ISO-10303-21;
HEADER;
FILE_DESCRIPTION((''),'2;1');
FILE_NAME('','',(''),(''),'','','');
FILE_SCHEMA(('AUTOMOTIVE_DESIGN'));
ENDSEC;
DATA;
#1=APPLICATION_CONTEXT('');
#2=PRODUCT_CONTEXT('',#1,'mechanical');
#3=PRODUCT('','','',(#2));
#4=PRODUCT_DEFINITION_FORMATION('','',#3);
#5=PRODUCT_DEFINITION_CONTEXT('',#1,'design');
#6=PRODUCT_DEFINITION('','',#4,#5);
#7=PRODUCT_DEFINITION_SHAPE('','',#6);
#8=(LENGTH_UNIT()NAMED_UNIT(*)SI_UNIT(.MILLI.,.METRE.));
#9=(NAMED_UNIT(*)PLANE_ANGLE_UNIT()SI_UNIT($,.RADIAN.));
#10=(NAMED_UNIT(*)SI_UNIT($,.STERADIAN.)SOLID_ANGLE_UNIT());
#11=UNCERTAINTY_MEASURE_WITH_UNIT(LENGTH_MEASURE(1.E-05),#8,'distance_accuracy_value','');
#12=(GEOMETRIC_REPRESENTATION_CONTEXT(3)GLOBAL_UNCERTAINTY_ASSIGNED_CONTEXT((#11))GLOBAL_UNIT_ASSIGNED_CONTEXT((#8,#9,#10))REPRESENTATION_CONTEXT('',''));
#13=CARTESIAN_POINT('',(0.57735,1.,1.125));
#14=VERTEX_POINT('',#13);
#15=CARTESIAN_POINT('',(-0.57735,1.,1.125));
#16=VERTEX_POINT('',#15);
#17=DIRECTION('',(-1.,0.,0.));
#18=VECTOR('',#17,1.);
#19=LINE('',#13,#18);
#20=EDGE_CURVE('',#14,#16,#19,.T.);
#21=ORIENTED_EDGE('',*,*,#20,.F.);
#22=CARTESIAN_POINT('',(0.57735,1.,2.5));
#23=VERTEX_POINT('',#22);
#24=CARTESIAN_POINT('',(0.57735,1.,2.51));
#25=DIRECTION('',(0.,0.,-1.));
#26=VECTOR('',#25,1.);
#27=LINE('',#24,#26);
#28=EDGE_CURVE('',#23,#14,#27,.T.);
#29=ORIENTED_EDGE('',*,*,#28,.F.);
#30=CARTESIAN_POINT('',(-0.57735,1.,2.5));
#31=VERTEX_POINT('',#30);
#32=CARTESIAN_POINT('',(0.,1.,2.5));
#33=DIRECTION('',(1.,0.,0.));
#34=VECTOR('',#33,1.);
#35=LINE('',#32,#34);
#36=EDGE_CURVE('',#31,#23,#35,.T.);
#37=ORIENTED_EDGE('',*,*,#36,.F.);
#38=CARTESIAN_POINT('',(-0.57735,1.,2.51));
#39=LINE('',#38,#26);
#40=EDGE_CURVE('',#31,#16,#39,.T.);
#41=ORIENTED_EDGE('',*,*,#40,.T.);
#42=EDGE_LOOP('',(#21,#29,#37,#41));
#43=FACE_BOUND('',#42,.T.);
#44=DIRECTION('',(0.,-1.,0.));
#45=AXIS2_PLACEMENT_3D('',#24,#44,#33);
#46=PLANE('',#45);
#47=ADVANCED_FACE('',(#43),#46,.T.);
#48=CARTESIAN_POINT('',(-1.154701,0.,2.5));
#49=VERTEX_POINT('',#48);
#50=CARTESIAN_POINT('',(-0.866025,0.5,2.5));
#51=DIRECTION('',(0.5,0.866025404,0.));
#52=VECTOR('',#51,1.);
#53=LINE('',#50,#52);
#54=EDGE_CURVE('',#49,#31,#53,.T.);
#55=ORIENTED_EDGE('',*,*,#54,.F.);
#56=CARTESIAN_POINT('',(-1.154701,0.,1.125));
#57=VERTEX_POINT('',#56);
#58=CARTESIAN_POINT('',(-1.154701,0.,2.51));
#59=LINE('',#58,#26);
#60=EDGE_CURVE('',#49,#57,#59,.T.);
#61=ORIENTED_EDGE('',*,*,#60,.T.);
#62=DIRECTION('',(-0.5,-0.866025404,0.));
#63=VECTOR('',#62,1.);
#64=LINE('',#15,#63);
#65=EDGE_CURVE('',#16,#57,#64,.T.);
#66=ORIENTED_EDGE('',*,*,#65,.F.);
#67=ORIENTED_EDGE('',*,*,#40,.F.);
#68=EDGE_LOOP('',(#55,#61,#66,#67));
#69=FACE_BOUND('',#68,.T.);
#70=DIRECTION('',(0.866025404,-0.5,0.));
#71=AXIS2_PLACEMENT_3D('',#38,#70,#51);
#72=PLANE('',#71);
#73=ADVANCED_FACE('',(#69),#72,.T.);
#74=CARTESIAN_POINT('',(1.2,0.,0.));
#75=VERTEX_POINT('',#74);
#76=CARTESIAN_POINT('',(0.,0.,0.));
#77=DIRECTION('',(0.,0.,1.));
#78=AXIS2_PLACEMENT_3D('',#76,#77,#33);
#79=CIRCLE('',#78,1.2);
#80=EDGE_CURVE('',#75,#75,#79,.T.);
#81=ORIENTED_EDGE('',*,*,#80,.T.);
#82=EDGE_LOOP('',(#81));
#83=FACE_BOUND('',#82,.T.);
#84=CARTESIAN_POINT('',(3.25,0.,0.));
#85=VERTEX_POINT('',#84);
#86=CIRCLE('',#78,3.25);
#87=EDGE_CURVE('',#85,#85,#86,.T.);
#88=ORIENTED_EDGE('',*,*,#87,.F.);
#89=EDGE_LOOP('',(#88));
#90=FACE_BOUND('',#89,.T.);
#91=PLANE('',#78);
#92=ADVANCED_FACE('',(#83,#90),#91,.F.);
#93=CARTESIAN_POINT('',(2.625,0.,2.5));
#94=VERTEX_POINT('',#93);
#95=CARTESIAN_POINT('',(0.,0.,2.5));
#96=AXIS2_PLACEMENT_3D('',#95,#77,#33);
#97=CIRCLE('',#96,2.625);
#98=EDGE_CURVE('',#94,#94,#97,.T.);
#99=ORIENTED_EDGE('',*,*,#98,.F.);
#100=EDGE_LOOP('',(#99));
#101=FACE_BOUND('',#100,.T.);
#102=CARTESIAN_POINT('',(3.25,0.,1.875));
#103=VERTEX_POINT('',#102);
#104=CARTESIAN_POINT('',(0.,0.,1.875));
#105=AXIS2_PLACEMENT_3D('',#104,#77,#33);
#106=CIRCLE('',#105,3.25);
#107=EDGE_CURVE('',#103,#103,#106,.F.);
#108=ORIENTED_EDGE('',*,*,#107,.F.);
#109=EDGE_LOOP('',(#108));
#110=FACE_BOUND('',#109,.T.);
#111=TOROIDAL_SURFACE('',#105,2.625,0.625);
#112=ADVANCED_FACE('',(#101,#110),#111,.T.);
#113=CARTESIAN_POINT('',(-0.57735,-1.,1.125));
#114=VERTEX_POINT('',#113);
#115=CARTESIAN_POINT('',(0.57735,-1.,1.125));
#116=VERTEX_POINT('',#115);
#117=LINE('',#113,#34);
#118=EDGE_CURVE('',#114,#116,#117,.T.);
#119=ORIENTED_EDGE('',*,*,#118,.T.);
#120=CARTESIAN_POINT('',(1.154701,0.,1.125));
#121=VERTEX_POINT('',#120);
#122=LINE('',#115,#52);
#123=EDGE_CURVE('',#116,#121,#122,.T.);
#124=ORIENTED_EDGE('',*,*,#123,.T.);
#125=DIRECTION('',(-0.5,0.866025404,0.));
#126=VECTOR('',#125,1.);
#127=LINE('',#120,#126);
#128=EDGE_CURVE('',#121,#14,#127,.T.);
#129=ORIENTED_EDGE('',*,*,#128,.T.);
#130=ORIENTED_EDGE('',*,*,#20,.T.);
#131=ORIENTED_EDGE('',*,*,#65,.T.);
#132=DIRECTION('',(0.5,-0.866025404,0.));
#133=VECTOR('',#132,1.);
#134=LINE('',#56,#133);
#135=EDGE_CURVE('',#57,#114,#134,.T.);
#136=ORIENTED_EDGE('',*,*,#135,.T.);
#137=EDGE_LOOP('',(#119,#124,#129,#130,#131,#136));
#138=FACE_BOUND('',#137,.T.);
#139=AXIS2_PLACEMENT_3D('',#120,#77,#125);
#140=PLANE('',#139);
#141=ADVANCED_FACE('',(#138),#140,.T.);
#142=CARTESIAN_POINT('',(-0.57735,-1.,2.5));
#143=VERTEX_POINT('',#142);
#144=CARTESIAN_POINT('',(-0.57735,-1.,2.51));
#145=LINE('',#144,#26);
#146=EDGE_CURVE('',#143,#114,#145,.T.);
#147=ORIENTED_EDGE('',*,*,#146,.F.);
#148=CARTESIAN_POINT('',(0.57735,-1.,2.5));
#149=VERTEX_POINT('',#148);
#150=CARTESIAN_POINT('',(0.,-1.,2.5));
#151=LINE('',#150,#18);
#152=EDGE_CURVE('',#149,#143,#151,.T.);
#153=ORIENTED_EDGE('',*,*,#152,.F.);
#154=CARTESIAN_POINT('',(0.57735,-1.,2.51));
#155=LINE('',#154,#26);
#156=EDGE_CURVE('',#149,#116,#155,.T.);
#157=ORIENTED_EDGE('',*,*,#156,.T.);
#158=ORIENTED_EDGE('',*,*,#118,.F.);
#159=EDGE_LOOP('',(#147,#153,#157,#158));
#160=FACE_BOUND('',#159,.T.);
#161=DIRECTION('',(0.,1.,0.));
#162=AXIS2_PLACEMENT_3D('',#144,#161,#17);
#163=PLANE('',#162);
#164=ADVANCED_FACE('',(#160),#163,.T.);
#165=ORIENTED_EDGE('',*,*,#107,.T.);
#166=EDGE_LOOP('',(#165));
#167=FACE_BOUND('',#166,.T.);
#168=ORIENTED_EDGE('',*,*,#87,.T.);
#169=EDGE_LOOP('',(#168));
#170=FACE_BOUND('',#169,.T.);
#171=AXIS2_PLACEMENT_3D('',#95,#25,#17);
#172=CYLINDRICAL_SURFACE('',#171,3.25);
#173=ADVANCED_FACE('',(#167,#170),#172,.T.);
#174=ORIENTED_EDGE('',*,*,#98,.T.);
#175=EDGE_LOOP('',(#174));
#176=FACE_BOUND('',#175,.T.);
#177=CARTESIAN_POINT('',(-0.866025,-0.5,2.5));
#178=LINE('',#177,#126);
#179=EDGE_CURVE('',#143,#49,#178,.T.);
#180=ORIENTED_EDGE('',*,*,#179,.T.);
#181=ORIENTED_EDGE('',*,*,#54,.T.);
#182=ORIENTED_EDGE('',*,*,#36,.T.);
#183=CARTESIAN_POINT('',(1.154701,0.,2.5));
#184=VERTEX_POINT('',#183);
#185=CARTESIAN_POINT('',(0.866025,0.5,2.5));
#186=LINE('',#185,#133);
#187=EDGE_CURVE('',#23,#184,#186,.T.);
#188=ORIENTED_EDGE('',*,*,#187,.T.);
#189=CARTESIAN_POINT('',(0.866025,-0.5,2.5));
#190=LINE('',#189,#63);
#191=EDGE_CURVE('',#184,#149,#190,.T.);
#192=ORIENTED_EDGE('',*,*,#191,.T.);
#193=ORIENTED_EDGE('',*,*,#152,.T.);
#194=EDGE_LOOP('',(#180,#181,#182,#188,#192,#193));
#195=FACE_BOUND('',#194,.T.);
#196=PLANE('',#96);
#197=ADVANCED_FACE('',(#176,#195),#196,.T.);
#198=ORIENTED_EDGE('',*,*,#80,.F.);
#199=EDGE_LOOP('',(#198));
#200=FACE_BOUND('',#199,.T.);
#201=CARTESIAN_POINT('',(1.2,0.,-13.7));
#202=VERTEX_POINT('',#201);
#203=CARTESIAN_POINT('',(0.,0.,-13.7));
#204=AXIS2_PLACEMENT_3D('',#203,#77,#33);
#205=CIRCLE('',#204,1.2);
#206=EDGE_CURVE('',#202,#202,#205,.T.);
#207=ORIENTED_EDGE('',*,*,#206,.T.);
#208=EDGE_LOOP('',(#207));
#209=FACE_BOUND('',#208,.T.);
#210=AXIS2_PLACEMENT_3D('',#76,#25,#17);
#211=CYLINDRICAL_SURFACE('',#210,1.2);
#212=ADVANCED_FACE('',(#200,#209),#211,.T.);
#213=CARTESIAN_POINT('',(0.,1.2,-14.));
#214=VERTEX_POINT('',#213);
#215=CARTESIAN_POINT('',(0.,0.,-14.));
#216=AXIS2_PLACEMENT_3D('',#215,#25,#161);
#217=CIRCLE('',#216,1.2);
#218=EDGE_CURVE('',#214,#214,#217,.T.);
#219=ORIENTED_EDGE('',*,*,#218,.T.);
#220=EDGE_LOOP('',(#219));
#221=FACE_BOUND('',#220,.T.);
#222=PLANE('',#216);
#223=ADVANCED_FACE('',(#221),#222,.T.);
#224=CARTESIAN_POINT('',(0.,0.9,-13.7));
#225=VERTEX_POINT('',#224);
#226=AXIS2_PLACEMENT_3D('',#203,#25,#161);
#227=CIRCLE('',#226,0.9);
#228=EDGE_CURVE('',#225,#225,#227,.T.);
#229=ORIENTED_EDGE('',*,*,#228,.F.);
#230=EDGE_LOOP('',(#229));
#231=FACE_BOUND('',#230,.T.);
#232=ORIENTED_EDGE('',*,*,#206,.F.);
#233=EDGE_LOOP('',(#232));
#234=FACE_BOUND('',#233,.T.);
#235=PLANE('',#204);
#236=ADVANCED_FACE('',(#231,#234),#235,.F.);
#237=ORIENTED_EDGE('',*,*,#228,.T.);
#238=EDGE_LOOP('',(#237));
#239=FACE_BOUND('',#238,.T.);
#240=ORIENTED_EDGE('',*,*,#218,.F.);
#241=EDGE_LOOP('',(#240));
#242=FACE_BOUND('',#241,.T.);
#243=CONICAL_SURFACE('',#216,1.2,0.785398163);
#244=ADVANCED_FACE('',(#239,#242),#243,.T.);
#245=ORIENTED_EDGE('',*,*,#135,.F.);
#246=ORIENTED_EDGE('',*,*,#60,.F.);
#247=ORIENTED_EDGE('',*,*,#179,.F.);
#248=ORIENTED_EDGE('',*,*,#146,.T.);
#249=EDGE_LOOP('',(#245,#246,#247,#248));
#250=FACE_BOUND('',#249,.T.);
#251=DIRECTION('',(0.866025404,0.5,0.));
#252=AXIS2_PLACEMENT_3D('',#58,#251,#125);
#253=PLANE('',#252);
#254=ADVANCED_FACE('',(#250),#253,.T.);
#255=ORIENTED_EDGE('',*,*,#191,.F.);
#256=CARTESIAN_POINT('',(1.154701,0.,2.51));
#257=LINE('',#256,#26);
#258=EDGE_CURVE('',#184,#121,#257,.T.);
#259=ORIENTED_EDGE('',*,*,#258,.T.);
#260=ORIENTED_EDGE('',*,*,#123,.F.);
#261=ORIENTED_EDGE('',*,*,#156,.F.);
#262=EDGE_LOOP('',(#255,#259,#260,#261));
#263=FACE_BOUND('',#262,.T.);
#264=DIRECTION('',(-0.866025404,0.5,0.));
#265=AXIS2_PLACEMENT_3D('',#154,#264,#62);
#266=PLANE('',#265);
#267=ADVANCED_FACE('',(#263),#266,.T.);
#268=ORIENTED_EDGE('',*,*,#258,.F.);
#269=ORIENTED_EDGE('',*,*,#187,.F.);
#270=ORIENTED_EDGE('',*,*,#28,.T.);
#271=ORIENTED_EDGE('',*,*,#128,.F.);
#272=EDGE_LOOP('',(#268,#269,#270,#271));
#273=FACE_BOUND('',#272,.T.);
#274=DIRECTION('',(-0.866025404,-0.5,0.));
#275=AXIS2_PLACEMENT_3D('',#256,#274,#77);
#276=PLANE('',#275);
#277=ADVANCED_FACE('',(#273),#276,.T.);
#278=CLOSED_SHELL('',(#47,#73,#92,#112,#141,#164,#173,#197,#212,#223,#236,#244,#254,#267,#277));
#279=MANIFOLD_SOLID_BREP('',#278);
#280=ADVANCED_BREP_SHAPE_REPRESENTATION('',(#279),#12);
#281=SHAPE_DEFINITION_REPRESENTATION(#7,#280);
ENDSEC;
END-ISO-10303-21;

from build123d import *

# Parameters (mm, degrees)
F_0045_CYLINDER_SKETCH_R    = 3.25
F_0045_CYLINDER_DEPTH       = 2.5
F_0046_FILLET_R             = 0.625
F_0047_EXTRUDE_DEPTH        = 1.385
F_0047_EXTRUDE_ROTATE_ANGLE = 120
F_0050_CYLINDER_SKETCH_R    = 1.2
F_0050_CYLINDER_DEPTH       = 13.7
F_0051_CONE_ROTATE_ANGLE    = 90


with BuildPart() as part:
    # 0045_cylinder_Sketch → 0045_cylinder (new body)
    with BuildSketch(Plane.XY):
        Circle(F_0045_CYLINDER_SKETCH_R)
    extrude(amount=F_0045_CYLINDER_DEPTH)

    # 0046_fillet
    f_0046_fillet_edges = [part.edges().sort_by_distance(p)[0] for p in [
        (-3.25, 0, 2.5),
    ]]
    fillet(f_0046_fillet_edges, radius=F_0046_FILLET_R)


with BuildPart() as body_2:
    # 0047_extrude_Sketch → 0047_extrude (new body)
    with BuildSketch(Plane.XY):
        Polygon((0, 0), (1.154700538, 0), (1.732050808, 1), (1.154700538, 2), (0, 2), (-0.577350269, 1), align=None)
    extrude(amount=F_0047_EXTRUDE_DEPTH)


with BuildPart() as body_2_1:
    # 0047_extrude_Rotate: read off the stored shape, not the designer's step
    # 0047_extrude_Rotate: moved
    add(body_2.part.rotate(Axis((0, 0, 0), (0, 0, 1)), F_0047_EXTRUDE_ROTATE_ANGLE))


with BuildPart() as body_2_2:
    # 0047_extrude_Translate: moved
    add(body_2_1.part.moved(Location((1.154700538, 0, 1.125))))


with BuildPart() as part_1:
    add(part.part)

    # 0049_sub: cut body 2
    add(body_2_2.part, mode=Mode.SUBTRACT)


with BuildPart() as body_2_2_1:
    # 0050_cylinder_Sketch → 0050_cylinder (new body)
    with BuildSketch(Plane.XY):
        Circle(F_0050_CYLINDER_SKETCH_R)
    extrude(amount=F_0050_CYLINDER_DEPTH)


with BuildPart() as body_2_2_2:
    # 0050_cylinder_Translate: moved
    add(body_2_2_1.part.moved(Location((0, 0, -13.7))))


with BuildPart() as body_3:
    # 0051_cone_Sketch → 0051_cone (revolve)
    with BuildSketch(Plane.XY, mode=Mode.PRIVATE) as f_0051_cone_sk:
        Polygon((0, 0), (1.2, 0), (0.9, 0.3), (0, 0.3), align=None)
    revolve(f_0051_cone_sk.sketch.rotate(Axis((0, -100, 0), (0, 1, 0)), 90), axis=Axis((0, -100, 0), (0, 1, 0)))


with BuildPart() as body_3_1:
    # 0051_cone_Rotate: moved
    add(body_3.part.rotate(Axis((0, 0, 0), (1, 0, 0)), F_0051_CONE_ROTATE_ANGLE))


with BuildPart() as body_3_2:
    # 0051_cone_Translate: moved
    add(body_3_1.part.moved(Location((0, 0, -14))))


with BuildPart() as body_2_2_3:
    add(body_2_2_2.part)

    # 0053_add: union body 3
    add(body_3_2.part)


with BuildPart() as part_2:
    add(part_1.part)

    # 0054_add: union body 2 2
    add(body_2_2_3.part)


solid = part_2.part
